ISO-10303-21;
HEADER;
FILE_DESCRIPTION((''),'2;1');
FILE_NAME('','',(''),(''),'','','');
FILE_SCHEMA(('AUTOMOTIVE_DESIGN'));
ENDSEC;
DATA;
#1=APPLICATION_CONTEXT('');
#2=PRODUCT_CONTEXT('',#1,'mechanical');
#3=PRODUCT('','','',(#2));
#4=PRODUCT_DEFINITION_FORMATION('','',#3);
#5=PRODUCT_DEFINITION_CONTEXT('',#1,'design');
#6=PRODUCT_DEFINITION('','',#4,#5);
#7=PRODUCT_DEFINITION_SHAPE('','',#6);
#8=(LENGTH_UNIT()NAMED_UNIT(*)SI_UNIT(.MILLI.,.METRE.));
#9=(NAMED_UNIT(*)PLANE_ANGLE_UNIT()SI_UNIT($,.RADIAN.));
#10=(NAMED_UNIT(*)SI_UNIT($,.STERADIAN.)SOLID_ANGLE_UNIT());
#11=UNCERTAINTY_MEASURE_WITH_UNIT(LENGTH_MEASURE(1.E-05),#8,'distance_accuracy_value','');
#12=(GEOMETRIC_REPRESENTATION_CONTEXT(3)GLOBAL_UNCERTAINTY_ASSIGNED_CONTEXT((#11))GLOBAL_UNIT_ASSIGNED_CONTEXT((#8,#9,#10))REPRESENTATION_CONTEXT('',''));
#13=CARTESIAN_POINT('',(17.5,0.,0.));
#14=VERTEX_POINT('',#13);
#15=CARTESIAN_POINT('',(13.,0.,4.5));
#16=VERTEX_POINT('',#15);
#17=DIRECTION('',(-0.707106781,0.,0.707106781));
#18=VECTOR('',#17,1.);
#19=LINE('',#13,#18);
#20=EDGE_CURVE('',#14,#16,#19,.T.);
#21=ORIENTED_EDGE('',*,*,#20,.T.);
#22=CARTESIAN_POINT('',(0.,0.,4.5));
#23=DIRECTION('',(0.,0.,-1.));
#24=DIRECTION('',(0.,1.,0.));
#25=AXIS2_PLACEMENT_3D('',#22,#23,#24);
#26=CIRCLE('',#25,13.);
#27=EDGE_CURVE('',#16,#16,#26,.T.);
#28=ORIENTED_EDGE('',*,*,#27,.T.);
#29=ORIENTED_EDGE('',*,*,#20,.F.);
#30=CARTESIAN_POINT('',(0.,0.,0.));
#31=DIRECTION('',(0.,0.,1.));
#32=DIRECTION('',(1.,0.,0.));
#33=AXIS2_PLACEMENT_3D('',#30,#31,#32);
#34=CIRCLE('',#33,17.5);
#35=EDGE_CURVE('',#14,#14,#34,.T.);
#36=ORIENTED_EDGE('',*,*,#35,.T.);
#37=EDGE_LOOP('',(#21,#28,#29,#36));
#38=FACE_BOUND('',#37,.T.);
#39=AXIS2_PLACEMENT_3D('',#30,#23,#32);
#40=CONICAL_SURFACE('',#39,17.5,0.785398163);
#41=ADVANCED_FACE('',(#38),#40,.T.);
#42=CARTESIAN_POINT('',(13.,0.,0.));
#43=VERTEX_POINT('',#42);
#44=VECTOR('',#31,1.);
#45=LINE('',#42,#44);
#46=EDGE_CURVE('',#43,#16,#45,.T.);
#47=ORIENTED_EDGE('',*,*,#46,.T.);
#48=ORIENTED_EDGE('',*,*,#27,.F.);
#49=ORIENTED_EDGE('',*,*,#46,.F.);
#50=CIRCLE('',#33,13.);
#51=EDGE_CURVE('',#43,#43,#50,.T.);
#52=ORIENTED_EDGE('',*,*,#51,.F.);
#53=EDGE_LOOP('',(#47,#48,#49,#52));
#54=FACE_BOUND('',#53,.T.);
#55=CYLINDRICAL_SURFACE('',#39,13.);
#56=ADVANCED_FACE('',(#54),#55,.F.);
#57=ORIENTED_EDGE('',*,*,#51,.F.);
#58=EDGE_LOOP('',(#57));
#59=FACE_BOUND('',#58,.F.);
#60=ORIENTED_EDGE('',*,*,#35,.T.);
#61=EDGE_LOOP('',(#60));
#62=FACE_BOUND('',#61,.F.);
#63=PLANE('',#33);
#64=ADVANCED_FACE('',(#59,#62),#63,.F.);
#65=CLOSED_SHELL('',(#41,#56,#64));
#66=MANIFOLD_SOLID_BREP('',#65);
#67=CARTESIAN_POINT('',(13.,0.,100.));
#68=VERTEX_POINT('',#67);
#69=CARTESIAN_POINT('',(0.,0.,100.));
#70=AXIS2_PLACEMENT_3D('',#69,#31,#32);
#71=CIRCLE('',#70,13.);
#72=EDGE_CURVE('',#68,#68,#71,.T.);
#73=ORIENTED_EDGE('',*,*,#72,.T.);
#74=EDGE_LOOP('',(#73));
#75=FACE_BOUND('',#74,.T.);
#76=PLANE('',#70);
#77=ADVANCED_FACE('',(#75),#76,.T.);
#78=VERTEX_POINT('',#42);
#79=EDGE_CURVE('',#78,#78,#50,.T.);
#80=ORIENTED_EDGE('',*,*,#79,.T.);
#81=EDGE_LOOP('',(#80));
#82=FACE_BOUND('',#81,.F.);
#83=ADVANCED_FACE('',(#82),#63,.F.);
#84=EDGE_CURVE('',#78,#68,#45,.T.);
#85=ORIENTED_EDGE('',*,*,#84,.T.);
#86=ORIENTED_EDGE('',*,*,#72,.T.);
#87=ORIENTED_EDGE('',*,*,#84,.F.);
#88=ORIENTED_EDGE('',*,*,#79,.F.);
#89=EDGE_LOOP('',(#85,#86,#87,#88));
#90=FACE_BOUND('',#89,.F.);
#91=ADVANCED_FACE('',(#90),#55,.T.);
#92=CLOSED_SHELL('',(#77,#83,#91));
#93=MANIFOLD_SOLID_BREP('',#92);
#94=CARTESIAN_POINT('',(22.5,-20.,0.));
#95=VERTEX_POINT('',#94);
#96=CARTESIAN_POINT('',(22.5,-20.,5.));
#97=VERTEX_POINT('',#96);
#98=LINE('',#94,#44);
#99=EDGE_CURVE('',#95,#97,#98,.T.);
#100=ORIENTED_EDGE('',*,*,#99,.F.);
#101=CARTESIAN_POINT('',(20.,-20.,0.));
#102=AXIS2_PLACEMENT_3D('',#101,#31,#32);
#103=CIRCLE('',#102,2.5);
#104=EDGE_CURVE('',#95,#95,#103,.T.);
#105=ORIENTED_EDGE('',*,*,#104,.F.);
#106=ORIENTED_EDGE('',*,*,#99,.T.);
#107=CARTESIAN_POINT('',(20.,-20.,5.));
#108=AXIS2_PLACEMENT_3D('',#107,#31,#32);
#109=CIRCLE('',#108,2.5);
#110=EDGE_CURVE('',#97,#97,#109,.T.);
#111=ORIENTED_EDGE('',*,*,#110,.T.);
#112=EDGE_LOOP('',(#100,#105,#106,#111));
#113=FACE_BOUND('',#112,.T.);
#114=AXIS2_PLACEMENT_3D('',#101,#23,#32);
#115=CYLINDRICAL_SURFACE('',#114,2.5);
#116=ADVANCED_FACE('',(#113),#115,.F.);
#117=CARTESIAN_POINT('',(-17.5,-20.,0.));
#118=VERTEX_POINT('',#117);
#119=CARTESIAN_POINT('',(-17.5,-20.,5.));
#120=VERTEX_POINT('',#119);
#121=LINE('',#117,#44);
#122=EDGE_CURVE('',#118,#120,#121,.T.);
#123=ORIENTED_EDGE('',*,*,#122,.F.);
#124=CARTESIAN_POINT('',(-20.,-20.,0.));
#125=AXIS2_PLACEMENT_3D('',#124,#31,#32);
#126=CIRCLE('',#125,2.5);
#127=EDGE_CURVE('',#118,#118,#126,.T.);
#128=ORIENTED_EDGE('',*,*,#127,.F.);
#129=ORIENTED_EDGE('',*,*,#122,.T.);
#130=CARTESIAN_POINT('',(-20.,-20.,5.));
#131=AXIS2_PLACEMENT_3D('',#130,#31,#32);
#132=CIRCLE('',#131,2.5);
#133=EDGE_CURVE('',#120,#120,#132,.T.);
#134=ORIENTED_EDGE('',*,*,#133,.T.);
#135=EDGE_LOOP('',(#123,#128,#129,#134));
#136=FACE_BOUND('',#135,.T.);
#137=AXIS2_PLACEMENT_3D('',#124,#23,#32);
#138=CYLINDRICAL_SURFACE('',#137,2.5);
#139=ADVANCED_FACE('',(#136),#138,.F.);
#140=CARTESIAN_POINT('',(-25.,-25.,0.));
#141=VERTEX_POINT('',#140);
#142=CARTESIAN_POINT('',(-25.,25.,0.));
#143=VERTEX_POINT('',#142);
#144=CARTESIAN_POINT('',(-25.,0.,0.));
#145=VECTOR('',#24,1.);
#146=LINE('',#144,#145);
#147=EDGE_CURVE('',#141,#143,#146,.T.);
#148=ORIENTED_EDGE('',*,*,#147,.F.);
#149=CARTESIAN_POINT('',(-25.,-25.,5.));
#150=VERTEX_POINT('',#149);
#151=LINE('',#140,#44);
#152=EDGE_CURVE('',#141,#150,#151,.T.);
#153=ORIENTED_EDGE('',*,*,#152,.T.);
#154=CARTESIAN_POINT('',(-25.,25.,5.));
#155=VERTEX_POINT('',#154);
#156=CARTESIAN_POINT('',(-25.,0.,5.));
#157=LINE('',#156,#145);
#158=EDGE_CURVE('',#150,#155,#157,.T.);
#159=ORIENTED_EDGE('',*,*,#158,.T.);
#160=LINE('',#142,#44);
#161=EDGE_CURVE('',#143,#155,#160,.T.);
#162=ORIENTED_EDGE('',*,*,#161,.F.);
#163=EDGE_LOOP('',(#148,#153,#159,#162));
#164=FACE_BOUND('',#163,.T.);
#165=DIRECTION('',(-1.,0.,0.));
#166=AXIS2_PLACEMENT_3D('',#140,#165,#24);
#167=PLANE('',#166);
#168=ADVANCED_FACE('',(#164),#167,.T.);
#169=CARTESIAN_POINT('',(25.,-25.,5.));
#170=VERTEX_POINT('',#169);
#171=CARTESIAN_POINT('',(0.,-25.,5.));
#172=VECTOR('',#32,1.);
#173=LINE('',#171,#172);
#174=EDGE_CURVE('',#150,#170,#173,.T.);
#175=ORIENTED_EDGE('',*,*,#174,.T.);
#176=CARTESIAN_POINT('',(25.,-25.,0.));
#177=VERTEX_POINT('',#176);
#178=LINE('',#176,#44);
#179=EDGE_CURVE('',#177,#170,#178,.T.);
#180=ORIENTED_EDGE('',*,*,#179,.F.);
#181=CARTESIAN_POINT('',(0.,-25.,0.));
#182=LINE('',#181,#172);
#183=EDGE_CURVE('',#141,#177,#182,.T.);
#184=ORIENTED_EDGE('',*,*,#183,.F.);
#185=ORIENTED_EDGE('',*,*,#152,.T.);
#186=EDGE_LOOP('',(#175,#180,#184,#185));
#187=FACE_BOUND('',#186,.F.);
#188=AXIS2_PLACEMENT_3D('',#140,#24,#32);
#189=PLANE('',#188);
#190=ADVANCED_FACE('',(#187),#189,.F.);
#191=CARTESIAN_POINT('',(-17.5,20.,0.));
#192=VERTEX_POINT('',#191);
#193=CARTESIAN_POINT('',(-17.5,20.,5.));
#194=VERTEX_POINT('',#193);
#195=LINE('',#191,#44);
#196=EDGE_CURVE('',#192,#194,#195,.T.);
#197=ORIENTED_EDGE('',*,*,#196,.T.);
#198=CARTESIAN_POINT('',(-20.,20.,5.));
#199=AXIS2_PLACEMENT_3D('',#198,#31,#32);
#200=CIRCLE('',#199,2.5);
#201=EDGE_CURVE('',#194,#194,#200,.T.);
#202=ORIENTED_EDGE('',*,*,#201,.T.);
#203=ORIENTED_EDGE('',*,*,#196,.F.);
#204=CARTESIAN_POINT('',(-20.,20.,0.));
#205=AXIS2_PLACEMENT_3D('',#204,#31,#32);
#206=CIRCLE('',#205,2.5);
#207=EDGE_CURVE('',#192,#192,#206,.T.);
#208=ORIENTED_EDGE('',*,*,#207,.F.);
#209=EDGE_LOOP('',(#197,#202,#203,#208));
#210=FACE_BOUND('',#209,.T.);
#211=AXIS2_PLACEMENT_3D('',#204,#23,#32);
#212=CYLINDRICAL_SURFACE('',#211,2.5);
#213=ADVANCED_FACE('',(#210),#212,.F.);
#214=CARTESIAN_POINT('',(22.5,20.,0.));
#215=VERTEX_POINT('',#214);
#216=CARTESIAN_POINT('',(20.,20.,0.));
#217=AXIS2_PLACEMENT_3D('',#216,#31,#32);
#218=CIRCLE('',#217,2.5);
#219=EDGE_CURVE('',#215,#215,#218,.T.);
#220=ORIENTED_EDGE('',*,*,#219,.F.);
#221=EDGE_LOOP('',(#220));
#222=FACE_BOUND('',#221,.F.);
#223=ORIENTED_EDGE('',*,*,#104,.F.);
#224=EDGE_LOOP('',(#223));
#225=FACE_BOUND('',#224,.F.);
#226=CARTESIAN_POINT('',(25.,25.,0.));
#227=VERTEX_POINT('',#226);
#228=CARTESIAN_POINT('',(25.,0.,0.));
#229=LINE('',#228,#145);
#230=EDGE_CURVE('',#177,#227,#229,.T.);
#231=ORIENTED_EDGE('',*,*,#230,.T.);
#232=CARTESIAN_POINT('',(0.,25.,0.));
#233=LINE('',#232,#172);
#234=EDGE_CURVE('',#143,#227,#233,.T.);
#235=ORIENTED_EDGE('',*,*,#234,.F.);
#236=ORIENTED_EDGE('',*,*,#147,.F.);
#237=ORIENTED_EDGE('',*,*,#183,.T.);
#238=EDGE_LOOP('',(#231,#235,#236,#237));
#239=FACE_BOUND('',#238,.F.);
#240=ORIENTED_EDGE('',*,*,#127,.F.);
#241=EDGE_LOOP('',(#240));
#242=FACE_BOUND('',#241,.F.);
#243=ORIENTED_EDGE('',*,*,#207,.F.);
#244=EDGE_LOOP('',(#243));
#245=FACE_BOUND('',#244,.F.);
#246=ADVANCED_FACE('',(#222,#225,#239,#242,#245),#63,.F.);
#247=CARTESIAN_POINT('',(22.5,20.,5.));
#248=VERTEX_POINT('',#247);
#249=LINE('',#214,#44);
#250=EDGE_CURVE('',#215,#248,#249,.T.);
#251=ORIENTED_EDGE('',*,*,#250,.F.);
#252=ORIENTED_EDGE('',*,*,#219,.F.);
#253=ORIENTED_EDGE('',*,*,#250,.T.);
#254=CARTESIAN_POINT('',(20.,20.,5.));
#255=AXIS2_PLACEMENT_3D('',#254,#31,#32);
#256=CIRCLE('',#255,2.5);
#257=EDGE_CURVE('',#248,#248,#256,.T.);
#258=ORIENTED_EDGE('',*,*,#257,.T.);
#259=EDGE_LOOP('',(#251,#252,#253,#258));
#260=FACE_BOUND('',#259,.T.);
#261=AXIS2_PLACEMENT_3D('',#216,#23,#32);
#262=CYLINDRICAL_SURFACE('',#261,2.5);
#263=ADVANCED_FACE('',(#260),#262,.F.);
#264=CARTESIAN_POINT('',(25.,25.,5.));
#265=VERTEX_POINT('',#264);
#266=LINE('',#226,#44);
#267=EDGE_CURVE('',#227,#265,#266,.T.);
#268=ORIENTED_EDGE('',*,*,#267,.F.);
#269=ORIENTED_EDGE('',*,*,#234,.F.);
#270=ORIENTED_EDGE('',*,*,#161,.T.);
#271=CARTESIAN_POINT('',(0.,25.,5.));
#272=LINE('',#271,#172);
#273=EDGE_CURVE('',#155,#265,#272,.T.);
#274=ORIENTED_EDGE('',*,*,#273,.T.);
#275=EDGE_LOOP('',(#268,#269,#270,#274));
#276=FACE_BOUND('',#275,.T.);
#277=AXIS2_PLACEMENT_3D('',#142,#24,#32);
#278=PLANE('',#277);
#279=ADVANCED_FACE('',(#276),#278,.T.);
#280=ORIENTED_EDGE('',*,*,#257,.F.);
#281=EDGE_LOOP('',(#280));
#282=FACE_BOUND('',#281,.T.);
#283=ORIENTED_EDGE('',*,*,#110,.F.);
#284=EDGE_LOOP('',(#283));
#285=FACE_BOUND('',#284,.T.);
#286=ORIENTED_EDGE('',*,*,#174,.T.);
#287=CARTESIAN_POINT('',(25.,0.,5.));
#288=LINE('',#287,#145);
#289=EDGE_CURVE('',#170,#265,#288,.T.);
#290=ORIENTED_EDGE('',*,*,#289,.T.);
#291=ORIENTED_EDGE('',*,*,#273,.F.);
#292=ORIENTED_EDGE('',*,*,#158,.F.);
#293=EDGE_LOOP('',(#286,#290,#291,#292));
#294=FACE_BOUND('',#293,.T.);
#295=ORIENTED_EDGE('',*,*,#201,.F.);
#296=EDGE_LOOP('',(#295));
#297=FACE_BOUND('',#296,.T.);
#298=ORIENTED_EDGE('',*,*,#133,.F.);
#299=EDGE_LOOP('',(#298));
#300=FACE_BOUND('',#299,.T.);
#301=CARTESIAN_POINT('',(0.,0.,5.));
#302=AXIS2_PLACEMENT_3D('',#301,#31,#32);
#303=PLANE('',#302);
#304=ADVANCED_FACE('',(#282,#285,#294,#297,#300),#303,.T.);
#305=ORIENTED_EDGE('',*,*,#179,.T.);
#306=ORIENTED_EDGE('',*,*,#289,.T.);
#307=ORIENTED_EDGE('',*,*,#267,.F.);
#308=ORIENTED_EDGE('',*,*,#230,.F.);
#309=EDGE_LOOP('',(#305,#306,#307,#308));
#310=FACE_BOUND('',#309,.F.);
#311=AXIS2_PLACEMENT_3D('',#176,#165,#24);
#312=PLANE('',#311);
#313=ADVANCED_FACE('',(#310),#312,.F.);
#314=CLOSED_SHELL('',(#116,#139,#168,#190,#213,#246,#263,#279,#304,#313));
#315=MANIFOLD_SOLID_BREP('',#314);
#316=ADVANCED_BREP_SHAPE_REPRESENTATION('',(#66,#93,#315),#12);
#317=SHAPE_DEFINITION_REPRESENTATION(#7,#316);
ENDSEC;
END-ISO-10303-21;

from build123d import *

# Parameters (mm, degrees)
F0_R     = 13
F1_DEPTH = 100
F2_W     = 50
F2_H     = 50
F2_R     = 2.5
F3_DEPTH = 5
F4_R     = 17.5
F4_R_2   = 13
F5_DEPTH = 5


# Not quite as in the source:
# - a fillet or chamfer that OpenCascade refuses, or shapes differently, is made with other operations: its cross-section is extruded or revolved along the edge and cut away or added


with BuildPart() as f1:
    # F0 (on Top) → F1 (new body)
    with BuildSketch(Plane.XY):
        Circle(F0_R)
    extrude(amount=F1_DEPTH)


with BuildPart() as f3:
    # F2 (on Top) → F3 (new body)
    with BuildSketch(Plane.XY):
        Rectangle(F2_W, F2_H)
        with Locations((-20, -20)):
            Circle(F2_R, mode=Mode.SUBTRACT)
        with Locations((20, -20)):
            Circle(F2_R, mode=Mode.SUBTRACT)
        with Locations((-20, 20)):
            Circle(F2_R, mode=Mode.SUBTRACT)
        with Locations((20, 20)):
            Circle(F2_R, mode=Mode.SUBTRACT)
    extrude(amount=F3_DEPTH)


with BuildPart() as f5:
    # F4 (on Top) → F5 (new body)
    with BuildSketch(Plane.XY):
        Circle(F4_R)
        Circle(F4_R_2, mode=Mode.SUBTRACT)
    extrude(amount=F5_DEPTH)

    # F6: chamfer of 5 on 1 edges, made by hand

    # F6_s1 → F6_t2 (revolve, cut)
    with BuildSketch(Plane.XZ):
        Polygon((17.5, 0), (12.5, 5), (17.5, 5), align=None)
    revolve(axis=Axis((0, 0, 5), (0, 0, 1)), mode=Mode.SUBTRACT)


solid = Compound([f1.part, f3.part, f5.part])
